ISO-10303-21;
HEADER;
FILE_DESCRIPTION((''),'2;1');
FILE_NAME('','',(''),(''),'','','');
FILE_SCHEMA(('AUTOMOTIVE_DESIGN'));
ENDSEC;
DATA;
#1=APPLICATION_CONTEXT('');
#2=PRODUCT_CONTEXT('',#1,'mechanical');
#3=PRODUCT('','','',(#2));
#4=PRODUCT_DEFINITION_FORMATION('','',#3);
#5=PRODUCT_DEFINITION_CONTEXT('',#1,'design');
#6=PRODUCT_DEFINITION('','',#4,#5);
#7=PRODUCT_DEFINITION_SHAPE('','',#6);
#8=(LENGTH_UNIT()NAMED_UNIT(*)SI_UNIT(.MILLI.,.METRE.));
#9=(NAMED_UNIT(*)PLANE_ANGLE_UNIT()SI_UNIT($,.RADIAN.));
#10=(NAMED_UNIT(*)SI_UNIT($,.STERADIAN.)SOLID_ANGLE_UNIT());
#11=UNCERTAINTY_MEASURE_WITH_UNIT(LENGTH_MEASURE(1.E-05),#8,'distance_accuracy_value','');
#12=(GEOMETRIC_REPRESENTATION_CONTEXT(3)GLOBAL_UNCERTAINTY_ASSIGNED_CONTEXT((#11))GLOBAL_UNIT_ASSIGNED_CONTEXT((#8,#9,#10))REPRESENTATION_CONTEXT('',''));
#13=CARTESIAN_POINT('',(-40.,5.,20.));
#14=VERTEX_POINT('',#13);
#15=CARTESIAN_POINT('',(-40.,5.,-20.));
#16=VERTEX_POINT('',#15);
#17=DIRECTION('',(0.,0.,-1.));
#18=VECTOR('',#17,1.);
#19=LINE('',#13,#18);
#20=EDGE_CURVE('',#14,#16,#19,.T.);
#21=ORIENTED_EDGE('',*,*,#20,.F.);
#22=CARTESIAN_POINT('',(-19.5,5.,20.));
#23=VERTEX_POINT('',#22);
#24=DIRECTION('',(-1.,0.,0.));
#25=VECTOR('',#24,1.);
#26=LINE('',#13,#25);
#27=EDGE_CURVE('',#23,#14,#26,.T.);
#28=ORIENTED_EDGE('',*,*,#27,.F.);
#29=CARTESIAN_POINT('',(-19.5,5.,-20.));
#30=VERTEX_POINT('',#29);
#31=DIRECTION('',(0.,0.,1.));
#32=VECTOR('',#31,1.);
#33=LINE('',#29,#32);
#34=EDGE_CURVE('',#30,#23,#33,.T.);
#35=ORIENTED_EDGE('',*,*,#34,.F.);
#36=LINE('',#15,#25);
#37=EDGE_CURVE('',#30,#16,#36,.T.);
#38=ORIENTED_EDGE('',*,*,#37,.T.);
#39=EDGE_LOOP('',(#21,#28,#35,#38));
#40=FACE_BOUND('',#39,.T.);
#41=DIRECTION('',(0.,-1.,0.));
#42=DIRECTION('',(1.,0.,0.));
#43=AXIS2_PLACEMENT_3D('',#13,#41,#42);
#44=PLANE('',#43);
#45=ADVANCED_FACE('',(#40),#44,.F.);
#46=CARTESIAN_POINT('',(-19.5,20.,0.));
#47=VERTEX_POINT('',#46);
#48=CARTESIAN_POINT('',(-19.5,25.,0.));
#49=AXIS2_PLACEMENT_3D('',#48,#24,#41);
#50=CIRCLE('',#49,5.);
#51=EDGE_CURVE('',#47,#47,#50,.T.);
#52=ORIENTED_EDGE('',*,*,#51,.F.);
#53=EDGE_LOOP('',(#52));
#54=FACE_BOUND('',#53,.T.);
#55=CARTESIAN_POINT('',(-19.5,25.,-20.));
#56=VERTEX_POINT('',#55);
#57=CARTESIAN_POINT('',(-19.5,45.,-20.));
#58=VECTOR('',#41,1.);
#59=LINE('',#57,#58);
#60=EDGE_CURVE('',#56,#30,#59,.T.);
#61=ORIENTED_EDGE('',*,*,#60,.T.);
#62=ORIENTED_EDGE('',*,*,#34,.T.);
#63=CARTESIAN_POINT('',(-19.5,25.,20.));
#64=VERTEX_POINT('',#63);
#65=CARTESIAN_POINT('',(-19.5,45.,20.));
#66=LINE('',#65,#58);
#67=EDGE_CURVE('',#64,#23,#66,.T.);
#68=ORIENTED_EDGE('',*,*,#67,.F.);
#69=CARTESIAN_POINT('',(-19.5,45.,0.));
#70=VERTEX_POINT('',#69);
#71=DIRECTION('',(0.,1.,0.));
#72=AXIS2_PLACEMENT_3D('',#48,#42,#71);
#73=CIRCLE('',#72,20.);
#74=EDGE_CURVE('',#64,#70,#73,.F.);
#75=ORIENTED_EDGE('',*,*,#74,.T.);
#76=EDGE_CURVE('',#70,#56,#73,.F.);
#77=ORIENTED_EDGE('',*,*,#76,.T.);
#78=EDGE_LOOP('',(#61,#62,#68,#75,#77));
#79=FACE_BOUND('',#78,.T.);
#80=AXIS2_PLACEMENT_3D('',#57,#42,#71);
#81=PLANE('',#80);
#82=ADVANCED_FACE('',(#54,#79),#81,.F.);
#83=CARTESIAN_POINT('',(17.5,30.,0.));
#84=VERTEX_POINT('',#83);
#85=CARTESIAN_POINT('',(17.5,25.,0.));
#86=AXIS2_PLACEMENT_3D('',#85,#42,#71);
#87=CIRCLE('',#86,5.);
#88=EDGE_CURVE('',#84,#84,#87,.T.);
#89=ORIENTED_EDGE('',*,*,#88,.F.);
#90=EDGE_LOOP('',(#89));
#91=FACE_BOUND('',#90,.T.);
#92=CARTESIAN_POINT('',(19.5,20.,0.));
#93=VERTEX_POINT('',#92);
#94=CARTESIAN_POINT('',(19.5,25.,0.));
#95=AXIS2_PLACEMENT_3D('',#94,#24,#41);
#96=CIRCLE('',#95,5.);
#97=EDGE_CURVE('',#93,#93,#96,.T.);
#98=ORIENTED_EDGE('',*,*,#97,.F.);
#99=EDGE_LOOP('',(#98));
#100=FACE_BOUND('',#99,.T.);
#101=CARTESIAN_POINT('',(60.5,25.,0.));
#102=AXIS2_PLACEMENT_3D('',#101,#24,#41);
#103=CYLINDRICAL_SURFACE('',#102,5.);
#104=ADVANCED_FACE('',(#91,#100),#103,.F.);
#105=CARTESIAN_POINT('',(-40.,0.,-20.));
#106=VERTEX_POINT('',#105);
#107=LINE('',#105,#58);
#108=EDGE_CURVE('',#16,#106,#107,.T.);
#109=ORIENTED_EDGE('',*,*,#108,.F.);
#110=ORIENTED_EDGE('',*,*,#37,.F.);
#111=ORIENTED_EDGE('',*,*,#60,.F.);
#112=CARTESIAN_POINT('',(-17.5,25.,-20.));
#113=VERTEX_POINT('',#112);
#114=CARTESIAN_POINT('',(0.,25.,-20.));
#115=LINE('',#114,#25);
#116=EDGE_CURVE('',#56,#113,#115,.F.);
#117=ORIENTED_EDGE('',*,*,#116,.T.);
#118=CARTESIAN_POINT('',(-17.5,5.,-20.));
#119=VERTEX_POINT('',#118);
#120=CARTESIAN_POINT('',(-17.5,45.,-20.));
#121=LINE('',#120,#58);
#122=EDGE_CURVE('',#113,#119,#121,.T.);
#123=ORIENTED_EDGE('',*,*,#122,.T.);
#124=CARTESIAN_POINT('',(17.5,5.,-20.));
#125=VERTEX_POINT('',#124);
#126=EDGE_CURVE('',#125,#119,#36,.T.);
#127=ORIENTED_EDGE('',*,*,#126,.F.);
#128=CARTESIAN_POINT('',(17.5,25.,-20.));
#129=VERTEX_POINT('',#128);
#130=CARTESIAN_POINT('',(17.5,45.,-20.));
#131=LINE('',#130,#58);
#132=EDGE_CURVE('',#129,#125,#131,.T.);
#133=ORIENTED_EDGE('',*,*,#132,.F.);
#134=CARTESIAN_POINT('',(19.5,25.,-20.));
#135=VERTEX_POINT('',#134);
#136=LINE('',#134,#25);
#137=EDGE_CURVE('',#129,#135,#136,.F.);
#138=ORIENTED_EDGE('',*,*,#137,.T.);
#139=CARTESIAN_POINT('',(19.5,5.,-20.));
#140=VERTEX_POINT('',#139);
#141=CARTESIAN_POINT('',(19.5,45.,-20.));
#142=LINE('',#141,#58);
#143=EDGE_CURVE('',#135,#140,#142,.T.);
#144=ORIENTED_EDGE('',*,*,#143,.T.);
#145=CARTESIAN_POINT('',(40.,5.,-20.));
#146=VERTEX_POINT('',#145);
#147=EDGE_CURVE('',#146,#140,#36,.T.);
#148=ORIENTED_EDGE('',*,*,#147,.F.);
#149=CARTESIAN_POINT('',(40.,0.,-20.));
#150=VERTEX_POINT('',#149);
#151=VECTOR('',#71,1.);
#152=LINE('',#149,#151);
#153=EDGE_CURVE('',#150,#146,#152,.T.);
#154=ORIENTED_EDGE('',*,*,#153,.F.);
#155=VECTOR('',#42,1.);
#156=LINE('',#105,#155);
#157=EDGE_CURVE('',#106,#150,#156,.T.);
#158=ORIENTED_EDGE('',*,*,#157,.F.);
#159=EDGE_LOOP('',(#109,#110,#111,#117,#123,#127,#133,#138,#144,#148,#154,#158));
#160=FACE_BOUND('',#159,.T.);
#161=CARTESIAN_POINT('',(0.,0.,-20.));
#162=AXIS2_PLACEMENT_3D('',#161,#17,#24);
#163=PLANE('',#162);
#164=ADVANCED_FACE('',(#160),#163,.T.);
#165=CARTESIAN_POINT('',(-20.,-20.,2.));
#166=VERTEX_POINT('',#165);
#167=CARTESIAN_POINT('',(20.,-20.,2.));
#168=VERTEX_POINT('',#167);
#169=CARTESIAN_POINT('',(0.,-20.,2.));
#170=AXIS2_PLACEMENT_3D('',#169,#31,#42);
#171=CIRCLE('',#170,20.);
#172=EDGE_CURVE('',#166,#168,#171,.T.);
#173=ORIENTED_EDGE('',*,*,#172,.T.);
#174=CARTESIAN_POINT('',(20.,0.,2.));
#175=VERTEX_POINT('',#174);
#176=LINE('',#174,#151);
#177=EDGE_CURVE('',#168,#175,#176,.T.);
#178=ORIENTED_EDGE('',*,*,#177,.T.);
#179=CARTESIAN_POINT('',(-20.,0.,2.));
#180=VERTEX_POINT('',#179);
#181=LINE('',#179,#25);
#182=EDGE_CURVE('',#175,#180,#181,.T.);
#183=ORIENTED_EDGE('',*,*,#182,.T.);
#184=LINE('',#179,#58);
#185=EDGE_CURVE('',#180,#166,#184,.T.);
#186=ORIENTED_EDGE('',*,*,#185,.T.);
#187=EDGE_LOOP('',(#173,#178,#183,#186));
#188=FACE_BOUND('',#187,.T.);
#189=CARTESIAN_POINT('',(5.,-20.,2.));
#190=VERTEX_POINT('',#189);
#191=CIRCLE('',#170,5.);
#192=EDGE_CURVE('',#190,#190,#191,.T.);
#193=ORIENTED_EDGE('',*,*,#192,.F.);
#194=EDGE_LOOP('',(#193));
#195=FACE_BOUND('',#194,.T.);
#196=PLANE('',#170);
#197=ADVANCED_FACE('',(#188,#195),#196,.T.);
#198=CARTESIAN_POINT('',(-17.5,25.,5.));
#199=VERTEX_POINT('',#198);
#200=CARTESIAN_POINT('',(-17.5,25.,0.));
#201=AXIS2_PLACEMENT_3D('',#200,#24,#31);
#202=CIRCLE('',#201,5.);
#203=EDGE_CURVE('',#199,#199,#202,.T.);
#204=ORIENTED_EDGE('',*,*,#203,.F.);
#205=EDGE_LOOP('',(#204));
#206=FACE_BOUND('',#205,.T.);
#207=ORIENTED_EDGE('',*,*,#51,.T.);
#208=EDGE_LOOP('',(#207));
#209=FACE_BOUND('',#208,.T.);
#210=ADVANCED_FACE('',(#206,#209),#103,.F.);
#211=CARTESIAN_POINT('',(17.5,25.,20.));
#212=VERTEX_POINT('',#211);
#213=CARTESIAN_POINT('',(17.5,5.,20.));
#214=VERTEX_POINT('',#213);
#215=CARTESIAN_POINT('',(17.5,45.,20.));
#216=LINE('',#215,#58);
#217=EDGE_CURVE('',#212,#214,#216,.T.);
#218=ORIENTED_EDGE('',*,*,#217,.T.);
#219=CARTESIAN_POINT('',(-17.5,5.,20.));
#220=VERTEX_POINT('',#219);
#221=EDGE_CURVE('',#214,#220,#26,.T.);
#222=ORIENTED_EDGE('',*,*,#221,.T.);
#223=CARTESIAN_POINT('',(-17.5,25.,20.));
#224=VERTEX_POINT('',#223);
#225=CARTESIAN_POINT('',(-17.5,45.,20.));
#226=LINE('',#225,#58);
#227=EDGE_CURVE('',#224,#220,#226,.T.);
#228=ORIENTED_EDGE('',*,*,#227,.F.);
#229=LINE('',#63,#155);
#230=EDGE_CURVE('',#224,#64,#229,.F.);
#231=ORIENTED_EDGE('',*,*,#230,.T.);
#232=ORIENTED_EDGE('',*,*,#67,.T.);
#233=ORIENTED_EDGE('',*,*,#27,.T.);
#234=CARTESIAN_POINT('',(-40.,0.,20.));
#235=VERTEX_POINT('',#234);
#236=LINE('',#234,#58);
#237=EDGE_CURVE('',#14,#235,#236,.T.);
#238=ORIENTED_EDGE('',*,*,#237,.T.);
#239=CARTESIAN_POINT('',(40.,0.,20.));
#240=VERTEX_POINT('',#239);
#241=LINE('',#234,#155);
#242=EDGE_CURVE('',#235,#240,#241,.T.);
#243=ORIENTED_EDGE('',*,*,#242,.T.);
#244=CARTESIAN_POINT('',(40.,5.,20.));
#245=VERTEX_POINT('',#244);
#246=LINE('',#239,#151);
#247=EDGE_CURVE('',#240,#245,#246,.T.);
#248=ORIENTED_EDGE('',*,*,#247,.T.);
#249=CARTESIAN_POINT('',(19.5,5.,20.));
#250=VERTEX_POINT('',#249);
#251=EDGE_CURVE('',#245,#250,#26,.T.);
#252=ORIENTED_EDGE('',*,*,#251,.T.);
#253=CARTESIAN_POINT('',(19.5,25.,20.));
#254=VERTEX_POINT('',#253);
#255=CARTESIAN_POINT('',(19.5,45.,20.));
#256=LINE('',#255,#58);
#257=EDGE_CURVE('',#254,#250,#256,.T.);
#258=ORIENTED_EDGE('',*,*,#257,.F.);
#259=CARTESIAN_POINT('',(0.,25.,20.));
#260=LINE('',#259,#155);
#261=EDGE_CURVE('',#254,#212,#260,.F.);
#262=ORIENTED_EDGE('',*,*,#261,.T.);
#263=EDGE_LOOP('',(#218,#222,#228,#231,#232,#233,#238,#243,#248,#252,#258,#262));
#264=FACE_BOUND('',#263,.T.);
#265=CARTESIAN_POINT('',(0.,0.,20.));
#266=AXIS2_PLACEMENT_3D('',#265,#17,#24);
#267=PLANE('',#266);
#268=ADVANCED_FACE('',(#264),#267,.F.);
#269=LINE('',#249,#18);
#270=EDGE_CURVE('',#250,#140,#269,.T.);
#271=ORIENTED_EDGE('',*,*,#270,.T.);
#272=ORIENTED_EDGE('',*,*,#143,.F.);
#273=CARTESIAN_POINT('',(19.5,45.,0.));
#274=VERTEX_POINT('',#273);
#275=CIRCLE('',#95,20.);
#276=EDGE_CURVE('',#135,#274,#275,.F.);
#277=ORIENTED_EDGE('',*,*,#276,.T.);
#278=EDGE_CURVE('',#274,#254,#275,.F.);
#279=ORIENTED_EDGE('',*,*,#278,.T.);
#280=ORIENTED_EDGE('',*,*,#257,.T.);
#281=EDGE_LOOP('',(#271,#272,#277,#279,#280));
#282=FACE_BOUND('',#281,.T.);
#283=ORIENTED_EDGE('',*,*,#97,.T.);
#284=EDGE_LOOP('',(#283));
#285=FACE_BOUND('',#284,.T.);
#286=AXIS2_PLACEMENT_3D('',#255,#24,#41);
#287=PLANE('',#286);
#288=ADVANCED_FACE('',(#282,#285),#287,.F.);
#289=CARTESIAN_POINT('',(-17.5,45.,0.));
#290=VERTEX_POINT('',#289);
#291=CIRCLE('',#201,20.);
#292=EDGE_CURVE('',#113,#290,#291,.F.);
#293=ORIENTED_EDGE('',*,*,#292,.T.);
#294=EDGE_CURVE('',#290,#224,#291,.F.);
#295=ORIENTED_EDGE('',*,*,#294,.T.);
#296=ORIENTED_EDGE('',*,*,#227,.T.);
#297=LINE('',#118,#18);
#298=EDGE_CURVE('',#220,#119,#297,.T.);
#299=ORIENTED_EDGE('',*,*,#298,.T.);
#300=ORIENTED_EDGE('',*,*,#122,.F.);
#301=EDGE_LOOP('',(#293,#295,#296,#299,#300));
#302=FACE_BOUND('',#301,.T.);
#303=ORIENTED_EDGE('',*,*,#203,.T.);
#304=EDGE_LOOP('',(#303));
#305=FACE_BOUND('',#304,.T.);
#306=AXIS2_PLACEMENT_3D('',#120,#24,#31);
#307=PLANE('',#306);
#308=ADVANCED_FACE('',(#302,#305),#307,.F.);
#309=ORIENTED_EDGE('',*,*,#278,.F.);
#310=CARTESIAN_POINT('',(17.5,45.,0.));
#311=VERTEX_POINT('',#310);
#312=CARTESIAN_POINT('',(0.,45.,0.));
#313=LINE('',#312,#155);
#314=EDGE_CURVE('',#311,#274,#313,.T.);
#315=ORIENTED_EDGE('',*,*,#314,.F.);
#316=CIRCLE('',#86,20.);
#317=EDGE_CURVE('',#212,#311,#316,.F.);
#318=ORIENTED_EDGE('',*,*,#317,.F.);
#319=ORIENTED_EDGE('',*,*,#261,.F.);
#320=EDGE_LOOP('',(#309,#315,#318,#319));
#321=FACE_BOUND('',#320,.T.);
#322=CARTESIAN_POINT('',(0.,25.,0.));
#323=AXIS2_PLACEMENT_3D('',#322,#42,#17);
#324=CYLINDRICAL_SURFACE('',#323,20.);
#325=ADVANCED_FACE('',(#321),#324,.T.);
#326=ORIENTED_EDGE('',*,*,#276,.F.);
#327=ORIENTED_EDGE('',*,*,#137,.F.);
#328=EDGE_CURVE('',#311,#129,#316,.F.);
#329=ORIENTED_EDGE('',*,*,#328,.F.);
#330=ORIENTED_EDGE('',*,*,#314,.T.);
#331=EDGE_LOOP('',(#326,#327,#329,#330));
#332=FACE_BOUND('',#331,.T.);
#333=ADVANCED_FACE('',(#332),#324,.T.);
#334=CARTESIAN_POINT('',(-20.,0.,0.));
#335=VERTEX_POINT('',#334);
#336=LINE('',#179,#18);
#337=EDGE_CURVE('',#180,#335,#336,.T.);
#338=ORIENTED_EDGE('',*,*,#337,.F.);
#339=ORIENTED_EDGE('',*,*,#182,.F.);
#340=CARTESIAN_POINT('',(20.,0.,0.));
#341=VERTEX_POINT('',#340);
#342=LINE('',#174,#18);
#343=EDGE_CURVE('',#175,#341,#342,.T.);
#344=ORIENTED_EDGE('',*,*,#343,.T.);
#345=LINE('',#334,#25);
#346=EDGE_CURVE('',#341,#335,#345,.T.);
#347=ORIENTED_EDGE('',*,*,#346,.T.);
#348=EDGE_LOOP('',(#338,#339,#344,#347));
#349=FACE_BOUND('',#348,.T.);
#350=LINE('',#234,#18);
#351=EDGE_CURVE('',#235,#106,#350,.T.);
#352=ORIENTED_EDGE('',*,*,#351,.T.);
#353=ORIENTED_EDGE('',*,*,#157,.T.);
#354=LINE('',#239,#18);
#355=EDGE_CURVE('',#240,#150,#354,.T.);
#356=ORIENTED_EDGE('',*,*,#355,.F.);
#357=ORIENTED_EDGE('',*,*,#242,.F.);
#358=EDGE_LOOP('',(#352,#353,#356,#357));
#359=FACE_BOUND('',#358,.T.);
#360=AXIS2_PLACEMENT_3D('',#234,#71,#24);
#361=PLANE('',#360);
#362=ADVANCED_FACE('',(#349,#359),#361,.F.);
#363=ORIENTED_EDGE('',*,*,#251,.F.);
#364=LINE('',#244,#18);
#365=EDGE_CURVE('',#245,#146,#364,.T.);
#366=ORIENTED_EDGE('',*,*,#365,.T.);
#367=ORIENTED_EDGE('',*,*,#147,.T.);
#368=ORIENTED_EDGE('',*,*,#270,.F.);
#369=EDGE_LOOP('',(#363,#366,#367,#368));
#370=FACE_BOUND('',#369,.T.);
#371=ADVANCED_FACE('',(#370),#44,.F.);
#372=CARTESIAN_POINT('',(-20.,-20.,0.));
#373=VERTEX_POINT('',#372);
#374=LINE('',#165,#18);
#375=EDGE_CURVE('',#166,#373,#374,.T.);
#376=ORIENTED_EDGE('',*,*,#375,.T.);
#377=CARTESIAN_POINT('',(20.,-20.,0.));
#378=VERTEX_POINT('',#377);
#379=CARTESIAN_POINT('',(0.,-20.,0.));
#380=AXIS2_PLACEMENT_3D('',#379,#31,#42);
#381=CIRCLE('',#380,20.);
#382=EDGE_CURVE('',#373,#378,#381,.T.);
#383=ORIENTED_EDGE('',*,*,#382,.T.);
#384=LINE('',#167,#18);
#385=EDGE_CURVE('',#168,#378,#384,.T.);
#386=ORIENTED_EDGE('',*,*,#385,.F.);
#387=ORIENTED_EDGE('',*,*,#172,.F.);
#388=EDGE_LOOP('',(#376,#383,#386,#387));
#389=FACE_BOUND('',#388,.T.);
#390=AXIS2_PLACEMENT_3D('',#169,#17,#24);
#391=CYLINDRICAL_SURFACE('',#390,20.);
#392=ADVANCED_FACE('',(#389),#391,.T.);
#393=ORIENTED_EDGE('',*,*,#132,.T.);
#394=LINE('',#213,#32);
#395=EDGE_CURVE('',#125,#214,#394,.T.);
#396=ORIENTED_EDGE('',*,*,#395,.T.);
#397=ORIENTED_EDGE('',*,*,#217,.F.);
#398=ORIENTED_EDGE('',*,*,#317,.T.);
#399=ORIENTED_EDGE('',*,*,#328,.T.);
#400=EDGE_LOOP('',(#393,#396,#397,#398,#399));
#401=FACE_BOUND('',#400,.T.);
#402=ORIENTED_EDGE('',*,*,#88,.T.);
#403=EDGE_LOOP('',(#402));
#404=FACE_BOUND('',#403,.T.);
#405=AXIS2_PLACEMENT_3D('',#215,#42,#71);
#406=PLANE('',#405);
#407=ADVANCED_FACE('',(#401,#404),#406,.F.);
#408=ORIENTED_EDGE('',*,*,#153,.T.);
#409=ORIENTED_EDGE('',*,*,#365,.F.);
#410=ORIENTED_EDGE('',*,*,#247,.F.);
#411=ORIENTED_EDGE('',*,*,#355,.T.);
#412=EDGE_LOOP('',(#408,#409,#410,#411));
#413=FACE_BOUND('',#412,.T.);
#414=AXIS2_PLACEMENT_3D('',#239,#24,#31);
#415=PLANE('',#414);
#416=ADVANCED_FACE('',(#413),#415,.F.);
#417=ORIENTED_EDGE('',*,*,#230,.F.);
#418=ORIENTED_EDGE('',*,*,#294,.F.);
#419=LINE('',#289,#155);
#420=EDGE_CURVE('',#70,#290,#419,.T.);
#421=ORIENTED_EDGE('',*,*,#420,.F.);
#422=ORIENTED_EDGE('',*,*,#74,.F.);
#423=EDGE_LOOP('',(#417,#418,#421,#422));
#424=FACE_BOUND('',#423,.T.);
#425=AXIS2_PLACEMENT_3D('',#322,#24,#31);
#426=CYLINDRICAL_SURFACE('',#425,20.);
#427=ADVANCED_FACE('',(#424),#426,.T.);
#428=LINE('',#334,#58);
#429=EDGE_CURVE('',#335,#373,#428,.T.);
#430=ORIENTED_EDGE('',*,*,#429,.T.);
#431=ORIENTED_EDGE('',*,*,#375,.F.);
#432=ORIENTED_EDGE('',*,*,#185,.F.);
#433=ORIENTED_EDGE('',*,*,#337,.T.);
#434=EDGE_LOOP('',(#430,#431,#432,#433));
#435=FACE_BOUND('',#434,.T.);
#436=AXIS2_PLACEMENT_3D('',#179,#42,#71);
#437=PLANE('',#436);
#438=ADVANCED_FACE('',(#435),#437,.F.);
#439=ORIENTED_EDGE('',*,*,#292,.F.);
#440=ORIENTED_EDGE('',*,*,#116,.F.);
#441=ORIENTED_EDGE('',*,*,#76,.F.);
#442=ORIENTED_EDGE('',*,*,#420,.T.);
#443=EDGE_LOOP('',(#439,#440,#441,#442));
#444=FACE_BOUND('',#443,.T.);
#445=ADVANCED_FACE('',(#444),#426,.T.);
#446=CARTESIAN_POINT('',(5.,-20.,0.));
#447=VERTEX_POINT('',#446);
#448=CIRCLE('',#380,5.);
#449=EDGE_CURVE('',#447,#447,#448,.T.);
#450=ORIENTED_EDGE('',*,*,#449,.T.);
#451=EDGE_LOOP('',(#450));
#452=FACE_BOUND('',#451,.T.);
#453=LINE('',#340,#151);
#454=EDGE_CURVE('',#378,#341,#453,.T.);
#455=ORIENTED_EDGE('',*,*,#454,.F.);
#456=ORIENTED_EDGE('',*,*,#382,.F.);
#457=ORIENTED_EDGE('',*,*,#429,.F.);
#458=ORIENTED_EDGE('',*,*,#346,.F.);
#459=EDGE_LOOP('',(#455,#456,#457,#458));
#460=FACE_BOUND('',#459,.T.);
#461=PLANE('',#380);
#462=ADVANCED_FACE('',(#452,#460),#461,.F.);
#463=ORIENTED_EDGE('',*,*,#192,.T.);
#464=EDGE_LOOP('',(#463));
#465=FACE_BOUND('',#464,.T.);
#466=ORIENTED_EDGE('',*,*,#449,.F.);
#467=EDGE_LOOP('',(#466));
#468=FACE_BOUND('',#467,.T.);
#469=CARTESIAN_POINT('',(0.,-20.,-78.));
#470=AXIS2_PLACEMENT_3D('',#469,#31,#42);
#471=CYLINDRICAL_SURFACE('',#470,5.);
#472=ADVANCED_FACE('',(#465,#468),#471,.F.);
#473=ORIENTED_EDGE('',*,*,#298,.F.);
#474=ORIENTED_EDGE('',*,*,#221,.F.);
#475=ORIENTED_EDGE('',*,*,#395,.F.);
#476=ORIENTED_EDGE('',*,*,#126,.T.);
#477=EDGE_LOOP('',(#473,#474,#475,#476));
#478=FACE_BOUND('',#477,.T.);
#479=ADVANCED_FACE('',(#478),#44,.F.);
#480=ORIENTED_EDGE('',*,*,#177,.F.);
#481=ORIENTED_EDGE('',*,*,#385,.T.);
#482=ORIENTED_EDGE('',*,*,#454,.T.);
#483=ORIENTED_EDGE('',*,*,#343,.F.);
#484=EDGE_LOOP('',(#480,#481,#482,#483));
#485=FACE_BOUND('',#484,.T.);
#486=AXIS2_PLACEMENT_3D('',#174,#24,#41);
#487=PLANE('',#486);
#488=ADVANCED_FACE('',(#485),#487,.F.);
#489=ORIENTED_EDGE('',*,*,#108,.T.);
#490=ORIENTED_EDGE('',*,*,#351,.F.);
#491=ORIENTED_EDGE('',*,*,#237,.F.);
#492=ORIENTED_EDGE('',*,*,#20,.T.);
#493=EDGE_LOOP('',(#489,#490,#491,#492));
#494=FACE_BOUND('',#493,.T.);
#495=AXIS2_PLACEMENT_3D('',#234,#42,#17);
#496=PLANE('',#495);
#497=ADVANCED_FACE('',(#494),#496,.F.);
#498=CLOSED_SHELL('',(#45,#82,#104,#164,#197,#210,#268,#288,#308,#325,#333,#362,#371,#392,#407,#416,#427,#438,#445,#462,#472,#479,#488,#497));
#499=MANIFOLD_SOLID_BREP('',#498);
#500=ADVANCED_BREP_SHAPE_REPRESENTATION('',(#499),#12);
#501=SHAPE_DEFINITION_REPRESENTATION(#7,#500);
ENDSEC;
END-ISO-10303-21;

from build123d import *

# Parameters (mm, degrees)
BOSS_EXTRUDE1_DEPTH = 2
SKETCH4_W           = 80
SKETCH4_H           = 5
BOSS_EXTRUDE2_DEPTH = 20
SKETCH5_W           = 2
SKETCH5_H           = 40
BOSS_EXTRUDE3_DEPTH = 40
FILLET1_R           = 20
SKETCH6_R           = 5
CUT_EXTRUDE1_DEPTH  = 80
SKETCH7_R           = 5
CUT_EXTRUDE2_DEPTH  = 80


with BuildPart() as part:
    # Sketch3 → Boss-Extrude1 (new body)
    with BuildSketch(Plane.XY):
        with BuildLine():
            Line((-20, 0), (20, 0))
            Line((20, 0), (20, -20))
            ThreePointArc((20, -20), (0, -40), (-20, -20))
            Line((-20, -20), (-20, 0))
        make_face()
    extrude(amount=BOSS_EXTRUDE1_DEPTH)

    # Sketch4 → Boss-Extrude2 (add, symmetric)
    with BuildSketch(Plane.XY):
        with Locations((0, 2.5)):
            Rectangle(SKETCH4_W, SKETCH4_H)
    extrude(amount=BOSS_EXTRUDE2_DEPTH, both=True)

    # Sketch5 → Boss-Extrude3 (add)
    with BuildSketch(Plane(origin=(0, 5, 0), x_dir=(1, 0, 0), z_dir=(0, 1, 0))):
        with Locations((-18.5, 0)):
            Rectangle(SKETCH5_W, SKETCH5_H)
        with Locations((18.5, 0)):
            Rectangle(SKETCH5_W, SKETCH5_H)
    extrude(amount=BOSS_EXTRUDE3_DEPTH)

    # Fillet1
    fillet1_edges = [part.edges().sort_by_distance(p)[0] for p in [
        (-18.5, 45, -20),
        (18.5, 45, -20),
        (-18.5, 45, 20),
        (18.5, 45, 20),
    ]]
    fillet(fillet1_edges, radius=FILLET1_R - 0.0001)  # a hair under: the kernel refuses the full size

    # Sketch6 → Cut-Extrude1 (cut)
    with BuildSketch(Plane.ZY.offset(19.5)):
        with Locations(Location((0, 25, 0), (0, 0, 270))):
            Circle(SKETCH6_R)
    extrude(amount=-CUT_EXTRUDE1_DEPTH, mode=Mode.SUBTRACT)

    # Sketch7 → Cut-Extrude2 (cut)
    with BuildSketch(Plane.XY.offset(2)):
        with Locations((0, -20)):
            Circle(SKETCH7_R)
    extrude(amount=-CUT_EXTRUDE2_DEPTH, mode=Mode.SUBTRACT)


solid = part.part
